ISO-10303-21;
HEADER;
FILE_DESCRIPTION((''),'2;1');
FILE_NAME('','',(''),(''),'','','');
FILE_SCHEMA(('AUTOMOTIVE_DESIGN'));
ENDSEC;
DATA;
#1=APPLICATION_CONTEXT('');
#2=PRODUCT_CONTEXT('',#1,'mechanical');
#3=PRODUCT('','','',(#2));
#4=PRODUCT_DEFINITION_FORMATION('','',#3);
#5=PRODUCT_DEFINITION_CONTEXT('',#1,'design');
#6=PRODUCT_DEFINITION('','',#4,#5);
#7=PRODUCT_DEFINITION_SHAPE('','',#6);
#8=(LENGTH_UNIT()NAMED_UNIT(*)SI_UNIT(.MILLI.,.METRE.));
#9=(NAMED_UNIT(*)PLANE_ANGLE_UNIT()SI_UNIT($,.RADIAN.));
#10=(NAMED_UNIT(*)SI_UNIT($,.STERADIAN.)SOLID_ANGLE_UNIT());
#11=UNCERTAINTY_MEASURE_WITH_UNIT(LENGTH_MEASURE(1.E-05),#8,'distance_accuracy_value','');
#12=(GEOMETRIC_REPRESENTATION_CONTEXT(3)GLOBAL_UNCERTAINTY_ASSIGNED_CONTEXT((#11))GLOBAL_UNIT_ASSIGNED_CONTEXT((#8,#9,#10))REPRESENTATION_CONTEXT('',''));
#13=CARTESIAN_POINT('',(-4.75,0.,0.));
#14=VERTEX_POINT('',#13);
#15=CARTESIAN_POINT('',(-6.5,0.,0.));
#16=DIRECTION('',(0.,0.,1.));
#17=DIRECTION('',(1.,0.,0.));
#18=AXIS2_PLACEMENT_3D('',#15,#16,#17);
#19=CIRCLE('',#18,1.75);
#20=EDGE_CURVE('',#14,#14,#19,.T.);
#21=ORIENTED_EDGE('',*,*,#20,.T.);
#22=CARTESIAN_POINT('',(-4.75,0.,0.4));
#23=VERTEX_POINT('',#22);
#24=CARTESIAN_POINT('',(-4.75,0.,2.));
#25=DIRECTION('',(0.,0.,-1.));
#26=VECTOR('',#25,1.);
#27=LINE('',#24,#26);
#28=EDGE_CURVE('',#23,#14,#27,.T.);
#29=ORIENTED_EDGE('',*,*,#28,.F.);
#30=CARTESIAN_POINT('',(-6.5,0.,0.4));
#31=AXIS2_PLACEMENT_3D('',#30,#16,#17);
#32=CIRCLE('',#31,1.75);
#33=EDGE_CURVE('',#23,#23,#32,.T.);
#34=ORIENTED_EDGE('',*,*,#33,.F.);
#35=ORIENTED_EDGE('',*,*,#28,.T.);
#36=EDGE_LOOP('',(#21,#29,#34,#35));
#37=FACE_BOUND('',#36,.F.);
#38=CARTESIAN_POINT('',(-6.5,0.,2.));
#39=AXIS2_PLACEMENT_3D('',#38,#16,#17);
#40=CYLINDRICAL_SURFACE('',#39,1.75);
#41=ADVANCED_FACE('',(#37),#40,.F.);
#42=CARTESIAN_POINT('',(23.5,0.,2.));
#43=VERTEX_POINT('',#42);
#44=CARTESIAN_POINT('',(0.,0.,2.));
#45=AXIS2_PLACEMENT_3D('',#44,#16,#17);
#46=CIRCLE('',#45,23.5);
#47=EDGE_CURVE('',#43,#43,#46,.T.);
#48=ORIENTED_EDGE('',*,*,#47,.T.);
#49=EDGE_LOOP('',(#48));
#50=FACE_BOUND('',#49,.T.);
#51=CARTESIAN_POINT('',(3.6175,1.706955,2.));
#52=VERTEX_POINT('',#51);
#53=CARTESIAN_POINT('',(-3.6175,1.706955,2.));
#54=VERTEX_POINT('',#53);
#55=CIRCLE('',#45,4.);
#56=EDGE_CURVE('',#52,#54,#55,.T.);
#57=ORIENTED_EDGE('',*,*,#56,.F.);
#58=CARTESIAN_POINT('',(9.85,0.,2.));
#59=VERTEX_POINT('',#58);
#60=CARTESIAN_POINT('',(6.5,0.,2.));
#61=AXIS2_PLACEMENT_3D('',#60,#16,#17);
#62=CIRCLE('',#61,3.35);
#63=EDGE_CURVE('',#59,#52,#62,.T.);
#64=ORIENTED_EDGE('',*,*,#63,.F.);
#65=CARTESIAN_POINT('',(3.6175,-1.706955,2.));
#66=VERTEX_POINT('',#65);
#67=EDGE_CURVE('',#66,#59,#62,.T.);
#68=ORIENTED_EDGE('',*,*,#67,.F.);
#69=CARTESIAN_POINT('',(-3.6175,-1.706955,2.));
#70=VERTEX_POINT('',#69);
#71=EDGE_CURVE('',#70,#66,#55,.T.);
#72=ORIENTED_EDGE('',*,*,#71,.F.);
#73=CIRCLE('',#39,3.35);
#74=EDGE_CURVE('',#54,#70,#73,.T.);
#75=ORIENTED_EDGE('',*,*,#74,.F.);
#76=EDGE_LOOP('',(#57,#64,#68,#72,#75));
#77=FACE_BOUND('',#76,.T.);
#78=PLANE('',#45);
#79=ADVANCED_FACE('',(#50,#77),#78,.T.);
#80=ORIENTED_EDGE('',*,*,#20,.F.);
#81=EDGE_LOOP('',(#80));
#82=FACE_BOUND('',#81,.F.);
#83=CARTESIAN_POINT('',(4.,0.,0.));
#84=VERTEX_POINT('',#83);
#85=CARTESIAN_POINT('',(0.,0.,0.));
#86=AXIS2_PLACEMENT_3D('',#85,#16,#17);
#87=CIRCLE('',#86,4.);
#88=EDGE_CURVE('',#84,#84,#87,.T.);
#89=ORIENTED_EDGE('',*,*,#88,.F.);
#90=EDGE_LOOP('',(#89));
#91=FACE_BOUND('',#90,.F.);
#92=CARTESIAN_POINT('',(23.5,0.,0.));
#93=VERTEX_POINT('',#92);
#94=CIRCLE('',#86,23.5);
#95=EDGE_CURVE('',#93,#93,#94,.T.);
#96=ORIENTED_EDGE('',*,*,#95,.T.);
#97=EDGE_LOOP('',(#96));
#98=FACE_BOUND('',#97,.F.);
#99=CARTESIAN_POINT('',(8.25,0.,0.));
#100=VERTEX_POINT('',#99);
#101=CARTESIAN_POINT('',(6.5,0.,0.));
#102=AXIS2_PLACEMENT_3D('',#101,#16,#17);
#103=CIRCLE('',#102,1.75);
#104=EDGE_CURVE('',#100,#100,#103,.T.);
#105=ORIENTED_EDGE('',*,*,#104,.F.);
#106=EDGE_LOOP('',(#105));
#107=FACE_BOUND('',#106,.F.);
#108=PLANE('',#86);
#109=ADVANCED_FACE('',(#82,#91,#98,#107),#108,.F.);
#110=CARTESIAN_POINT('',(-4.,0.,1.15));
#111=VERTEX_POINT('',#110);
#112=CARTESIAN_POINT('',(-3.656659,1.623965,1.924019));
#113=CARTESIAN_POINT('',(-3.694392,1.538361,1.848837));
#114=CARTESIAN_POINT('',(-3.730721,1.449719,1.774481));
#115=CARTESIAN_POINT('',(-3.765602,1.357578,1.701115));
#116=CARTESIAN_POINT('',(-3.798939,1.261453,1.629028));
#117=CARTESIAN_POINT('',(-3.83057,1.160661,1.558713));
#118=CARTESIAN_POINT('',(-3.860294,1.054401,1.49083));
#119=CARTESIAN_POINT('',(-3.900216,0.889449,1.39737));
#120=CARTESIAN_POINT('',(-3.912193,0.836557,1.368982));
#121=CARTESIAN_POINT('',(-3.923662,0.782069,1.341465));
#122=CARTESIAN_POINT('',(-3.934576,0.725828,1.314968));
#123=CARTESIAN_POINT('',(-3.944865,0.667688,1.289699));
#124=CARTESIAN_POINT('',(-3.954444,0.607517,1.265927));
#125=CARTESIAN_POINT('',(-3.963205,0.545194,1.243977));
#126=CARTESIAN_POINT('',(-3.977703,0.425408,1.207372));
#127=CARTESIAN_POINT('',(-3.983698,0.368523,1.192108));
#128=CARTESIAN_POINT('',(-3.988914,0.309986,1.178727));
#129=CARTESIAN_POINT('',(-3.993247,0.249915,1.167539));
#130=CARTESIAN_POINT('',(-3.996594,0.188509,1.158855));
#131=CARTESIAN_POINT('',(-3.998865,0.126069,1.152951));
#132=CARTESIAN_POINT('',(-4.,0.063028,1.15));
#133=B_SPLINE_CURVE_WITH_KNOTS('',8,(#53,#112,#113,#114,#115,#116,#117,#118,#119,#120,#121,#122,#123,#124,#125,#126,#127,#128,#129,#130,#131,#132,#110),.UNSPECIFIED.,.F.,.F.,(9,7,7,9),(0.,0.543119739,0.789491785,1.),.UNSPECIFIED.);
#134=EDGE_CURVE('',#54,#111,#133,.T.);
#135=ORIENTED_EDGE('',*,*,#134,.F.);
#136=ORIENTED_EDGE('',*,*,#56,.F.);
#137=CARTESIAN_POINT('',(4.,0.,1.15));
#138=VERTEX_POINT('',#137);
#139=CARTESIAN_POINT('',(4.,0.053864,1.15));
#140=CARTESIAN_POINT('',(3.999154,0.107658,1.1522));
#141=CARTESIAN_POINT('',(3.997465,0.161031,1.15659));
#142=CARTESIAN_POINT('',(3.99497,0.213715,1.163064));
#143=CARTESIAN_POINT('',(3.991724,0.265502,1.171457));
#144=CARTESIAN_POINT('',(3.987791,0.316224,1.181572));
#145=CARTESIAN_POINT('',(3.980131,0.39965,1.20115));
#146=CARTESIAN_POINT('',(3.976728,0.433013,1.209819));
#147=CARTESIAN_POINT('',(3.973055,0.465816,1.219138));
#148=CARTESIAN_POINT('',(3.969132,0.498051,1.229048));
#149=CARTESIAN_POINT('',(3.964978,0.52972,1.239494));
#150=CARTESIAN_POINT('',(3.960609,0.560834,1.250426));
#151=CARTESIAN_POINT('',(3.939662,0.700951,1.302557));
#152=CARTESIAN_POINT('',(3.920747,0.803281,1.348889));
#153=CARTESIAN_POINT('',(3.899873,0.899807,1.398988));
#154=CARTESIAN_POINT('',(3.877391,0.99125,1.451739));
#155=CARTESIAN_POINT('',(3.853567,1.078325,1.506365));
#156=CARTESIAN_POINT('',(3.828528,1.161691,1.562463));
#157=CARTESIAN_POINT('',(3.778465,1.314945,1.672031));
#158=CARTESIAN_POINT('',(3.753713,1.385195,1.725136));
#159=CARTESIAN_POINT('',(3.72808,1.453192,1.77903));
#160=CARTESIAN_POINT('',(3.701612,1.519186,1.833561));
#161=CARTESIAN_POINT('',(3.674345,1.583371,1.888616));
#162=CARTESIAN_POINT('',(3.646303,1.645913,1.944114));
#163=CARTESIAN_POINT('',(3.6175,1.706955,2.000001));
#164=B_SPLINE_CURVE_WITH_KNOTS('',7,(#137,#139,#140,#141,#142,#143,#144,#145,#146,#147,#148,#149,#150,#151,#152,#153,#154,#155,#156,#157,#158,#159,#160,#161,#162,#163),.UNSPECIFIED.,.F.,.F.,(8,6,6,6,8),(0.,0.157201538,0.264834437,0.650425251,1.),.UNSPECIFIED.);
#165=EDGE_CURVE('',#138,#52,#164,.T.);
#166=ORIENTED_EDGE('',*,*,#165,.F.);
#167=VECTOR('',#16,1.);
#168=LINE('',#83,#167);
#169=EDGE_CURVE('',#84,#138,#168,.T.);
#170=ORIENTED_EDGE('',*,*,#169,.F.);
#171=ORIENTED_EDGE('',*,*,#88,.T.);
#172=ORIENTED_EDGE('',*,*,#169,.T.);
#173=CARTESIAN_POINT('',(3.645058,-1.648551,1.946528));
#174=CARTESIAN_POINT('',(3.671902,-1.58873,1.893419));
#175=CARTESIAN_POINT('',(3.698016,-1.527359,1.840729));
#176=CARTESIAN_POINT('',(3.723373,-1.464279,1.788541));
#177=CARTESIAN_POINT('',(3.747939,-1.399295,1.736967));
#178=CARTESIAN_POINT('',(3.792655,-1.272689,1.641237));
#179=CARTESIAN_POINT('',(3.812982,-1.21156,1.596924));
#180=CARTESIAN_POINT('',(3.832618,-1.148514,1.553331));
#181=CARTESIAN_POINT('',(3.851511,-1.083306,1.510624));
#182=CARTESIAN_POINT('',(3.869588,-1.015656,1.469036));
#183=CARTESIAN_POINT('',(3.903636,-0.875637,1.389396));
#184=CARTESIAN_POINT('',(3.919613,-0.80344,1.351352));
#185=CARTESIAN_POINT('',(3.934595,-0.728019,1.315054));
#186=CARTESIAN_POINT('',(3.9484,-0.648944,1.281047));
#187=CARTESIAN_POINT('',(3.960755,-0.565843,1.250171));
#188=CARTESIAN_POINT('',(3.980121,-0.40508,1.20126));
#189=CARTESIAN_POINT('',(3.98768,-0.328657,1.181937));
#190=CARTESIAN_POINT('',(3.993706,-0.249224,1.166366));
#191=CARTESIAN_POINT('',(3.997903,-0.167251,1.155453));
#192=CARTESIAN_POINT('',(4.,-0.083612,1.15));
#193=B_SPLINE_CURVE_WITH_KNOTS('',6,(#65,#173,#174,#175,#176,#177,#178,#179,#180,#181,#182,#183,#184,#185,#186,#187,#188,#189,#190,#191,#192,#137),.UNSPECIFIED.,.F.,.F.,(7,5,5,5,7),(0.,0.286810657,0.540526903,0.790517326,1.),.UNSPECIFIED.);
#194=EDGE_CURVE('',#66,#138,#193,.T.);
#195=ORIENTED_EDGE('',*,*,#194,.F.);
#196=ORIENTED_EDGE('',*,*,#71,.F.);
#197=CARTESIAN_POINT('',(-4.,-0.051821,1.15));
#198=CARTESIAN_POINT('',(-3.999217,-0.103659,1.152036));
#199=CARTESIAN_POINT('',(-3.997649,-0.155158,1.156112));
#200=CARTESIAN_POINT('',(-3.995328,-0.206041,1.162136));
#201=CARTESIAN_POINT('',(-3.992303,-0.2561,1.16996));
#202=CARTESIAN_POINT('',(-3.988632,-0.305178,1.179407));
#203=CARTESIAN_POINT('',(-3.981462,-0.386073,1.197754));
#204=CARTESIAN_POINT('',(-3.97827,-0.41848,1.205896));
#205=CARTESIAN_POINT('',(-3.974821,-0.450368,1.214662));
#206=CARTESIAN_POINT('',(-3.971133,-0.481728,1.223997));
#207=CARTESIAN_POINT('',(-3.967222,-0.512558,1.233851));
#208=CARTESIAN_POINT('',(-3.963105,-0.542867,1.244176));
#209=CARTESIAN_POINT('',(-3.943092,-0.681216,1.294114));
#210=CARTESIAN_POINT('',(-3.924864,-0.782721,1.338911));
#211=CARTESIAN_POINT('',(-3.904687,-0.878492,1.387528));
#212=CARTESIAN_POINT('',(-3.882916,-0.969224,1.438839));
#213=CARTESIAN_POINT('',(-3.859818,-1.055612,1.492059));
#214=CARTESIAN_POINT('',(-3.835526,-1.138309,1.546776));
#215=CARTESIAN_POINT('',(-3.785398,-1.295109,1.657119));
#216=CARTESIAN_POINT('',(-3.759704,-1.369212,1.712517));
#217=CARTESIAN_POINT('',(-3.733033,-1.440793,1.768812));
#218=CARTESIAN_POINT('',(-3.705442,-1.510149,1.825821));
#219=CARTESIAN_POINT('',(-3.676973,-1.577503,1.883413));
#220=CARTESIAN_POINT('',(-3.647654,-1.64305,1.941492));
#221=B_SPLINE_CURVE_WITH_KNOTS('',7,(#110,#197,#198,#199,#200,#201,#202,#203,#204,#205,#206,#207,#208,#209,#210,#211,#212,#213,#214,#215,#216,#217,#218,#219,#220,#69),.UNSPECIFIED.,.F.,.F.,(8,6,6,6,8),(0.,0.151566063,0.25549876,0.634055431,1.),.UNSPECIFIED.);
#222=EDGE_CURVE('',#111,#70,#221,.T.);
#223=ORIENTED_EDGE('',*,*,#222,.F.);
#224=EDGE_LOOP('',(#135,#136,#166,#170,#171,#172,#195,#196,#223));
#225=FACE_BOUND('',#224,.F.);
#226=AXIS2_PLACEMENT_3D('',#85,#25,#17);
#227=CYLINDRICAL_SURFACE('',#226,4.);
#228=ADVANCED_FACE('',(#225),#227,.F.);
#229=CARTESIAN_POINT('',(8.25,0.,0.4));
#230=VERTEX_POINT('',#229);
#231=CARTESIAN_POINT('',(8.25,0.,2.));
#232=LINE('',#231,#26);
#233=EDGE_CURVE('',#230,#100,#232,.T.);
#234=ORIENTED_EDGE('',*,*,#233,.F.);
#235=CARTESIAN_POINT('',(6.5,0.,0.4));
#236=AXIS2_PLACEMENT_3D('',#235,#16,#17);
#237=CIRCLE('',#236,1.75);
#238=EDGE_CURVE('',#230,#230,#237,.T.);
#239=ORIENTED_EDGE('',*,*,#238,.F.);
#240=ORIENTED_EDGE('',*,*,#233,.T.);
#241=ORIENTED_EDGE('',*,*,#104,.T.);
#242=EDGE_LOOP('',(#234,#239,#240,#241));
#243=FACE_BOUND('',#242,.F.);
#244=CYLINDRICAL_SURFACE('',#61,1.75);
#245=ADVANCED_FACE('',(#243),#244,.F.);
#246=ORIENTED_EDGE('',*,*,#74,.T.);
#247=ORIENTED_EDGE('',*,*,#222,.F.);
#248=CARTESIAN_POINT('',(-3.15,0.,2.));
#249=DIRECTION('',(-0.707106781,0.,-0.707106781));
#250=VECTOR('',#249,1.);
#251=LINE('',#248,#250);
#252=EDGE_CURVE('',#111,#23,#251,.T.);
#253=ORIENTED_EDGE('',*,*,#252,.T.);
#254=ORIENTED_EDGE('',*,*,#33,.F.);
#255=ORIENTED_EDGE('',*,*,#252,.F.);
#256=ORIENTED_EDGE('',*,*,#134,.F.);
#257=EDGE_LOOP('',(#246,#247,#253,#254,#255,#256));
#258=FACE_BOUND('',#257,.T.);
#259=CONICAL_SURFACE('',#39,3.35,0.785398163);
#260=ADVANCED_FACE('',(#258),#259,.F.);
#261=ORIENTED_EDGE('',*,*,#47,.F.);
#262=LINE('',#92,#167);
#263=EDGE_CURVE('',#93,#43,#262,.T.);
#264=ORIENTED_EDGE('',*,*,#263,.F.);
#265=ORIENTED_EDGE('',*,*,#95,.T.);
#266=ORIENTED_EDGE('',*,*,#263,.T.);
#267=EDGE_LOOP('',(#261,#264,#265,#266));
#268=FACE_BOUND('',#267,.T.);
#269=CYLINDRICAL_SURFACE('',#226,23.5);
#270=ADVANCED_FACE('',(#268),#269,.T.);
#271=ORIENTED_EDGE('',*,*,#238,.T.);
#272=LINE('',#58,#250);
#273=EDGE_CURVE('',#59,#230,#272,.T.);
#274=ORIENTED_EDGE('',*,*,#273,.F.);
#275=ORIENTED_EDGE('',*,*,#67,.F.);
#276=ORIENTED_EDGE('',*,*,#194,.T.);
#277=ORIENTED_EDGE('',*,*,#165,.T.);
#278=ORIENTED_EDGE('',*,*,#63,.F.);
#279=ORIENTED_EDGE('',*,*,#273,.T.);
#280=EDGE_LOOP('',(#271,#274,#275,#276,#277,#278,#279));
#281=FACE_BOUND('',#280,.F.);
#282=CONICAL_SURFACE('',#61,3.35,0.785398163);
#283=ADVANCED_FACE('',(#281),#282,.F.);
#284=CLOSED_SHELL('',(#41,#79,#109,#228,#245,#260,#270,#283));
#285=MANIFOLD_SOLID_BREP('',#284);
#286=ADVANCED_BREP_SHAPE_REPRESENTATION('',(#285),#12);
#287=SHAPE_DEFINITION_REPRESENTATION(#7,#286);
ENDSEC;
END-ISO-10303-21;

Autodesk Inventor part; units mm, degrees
ref_plane "YZ Plane" through (0, 0, 0) normal (1, 0, 0) x (0, 1, 0)
ref_plane "XZ Plane" through (0, 0, 0) normal (0, 1, 0) x (-1, 0, 0)
ref_plane "XY Plane" through (0, 0, 0) normal (0, 0, 1) x (1, 0, 0)
sketch "スケッチ1" plane through (0, 0, 0) normal (0, 0, 1) x (1, 0, 0)
  circle A0 centre (0, 0) radius 23.5
  circle A1 centre (0, 0) radius 4
  dimension "d0" = 47
  dimension "d1" = 8
extrude "押し出し1" add sketch "スケッチ1" along normal blind 2
sketch "スケッチ2" plane through (0, 0, 2) normal (0, 0, 1) x (1, 0, 0)
  circle A0 centre (0, 0) radius 6.5 construction
  circle A1 centre (-6.5, 0) radius 1.75
  circle A2 centre (6.5, 0) radius 1.75
  dimension "d4" = 13
  dimension "d5" = 3.5
extrude "押し出し2" cut sketch "スケッチ2" against normal blind 2
chamfer "面取り1" distance 1.6 angle 45 2 edges at (-8.25, 0, 2) (4.75, 0, 2)
properties part number "SlitDiscSupport1"
